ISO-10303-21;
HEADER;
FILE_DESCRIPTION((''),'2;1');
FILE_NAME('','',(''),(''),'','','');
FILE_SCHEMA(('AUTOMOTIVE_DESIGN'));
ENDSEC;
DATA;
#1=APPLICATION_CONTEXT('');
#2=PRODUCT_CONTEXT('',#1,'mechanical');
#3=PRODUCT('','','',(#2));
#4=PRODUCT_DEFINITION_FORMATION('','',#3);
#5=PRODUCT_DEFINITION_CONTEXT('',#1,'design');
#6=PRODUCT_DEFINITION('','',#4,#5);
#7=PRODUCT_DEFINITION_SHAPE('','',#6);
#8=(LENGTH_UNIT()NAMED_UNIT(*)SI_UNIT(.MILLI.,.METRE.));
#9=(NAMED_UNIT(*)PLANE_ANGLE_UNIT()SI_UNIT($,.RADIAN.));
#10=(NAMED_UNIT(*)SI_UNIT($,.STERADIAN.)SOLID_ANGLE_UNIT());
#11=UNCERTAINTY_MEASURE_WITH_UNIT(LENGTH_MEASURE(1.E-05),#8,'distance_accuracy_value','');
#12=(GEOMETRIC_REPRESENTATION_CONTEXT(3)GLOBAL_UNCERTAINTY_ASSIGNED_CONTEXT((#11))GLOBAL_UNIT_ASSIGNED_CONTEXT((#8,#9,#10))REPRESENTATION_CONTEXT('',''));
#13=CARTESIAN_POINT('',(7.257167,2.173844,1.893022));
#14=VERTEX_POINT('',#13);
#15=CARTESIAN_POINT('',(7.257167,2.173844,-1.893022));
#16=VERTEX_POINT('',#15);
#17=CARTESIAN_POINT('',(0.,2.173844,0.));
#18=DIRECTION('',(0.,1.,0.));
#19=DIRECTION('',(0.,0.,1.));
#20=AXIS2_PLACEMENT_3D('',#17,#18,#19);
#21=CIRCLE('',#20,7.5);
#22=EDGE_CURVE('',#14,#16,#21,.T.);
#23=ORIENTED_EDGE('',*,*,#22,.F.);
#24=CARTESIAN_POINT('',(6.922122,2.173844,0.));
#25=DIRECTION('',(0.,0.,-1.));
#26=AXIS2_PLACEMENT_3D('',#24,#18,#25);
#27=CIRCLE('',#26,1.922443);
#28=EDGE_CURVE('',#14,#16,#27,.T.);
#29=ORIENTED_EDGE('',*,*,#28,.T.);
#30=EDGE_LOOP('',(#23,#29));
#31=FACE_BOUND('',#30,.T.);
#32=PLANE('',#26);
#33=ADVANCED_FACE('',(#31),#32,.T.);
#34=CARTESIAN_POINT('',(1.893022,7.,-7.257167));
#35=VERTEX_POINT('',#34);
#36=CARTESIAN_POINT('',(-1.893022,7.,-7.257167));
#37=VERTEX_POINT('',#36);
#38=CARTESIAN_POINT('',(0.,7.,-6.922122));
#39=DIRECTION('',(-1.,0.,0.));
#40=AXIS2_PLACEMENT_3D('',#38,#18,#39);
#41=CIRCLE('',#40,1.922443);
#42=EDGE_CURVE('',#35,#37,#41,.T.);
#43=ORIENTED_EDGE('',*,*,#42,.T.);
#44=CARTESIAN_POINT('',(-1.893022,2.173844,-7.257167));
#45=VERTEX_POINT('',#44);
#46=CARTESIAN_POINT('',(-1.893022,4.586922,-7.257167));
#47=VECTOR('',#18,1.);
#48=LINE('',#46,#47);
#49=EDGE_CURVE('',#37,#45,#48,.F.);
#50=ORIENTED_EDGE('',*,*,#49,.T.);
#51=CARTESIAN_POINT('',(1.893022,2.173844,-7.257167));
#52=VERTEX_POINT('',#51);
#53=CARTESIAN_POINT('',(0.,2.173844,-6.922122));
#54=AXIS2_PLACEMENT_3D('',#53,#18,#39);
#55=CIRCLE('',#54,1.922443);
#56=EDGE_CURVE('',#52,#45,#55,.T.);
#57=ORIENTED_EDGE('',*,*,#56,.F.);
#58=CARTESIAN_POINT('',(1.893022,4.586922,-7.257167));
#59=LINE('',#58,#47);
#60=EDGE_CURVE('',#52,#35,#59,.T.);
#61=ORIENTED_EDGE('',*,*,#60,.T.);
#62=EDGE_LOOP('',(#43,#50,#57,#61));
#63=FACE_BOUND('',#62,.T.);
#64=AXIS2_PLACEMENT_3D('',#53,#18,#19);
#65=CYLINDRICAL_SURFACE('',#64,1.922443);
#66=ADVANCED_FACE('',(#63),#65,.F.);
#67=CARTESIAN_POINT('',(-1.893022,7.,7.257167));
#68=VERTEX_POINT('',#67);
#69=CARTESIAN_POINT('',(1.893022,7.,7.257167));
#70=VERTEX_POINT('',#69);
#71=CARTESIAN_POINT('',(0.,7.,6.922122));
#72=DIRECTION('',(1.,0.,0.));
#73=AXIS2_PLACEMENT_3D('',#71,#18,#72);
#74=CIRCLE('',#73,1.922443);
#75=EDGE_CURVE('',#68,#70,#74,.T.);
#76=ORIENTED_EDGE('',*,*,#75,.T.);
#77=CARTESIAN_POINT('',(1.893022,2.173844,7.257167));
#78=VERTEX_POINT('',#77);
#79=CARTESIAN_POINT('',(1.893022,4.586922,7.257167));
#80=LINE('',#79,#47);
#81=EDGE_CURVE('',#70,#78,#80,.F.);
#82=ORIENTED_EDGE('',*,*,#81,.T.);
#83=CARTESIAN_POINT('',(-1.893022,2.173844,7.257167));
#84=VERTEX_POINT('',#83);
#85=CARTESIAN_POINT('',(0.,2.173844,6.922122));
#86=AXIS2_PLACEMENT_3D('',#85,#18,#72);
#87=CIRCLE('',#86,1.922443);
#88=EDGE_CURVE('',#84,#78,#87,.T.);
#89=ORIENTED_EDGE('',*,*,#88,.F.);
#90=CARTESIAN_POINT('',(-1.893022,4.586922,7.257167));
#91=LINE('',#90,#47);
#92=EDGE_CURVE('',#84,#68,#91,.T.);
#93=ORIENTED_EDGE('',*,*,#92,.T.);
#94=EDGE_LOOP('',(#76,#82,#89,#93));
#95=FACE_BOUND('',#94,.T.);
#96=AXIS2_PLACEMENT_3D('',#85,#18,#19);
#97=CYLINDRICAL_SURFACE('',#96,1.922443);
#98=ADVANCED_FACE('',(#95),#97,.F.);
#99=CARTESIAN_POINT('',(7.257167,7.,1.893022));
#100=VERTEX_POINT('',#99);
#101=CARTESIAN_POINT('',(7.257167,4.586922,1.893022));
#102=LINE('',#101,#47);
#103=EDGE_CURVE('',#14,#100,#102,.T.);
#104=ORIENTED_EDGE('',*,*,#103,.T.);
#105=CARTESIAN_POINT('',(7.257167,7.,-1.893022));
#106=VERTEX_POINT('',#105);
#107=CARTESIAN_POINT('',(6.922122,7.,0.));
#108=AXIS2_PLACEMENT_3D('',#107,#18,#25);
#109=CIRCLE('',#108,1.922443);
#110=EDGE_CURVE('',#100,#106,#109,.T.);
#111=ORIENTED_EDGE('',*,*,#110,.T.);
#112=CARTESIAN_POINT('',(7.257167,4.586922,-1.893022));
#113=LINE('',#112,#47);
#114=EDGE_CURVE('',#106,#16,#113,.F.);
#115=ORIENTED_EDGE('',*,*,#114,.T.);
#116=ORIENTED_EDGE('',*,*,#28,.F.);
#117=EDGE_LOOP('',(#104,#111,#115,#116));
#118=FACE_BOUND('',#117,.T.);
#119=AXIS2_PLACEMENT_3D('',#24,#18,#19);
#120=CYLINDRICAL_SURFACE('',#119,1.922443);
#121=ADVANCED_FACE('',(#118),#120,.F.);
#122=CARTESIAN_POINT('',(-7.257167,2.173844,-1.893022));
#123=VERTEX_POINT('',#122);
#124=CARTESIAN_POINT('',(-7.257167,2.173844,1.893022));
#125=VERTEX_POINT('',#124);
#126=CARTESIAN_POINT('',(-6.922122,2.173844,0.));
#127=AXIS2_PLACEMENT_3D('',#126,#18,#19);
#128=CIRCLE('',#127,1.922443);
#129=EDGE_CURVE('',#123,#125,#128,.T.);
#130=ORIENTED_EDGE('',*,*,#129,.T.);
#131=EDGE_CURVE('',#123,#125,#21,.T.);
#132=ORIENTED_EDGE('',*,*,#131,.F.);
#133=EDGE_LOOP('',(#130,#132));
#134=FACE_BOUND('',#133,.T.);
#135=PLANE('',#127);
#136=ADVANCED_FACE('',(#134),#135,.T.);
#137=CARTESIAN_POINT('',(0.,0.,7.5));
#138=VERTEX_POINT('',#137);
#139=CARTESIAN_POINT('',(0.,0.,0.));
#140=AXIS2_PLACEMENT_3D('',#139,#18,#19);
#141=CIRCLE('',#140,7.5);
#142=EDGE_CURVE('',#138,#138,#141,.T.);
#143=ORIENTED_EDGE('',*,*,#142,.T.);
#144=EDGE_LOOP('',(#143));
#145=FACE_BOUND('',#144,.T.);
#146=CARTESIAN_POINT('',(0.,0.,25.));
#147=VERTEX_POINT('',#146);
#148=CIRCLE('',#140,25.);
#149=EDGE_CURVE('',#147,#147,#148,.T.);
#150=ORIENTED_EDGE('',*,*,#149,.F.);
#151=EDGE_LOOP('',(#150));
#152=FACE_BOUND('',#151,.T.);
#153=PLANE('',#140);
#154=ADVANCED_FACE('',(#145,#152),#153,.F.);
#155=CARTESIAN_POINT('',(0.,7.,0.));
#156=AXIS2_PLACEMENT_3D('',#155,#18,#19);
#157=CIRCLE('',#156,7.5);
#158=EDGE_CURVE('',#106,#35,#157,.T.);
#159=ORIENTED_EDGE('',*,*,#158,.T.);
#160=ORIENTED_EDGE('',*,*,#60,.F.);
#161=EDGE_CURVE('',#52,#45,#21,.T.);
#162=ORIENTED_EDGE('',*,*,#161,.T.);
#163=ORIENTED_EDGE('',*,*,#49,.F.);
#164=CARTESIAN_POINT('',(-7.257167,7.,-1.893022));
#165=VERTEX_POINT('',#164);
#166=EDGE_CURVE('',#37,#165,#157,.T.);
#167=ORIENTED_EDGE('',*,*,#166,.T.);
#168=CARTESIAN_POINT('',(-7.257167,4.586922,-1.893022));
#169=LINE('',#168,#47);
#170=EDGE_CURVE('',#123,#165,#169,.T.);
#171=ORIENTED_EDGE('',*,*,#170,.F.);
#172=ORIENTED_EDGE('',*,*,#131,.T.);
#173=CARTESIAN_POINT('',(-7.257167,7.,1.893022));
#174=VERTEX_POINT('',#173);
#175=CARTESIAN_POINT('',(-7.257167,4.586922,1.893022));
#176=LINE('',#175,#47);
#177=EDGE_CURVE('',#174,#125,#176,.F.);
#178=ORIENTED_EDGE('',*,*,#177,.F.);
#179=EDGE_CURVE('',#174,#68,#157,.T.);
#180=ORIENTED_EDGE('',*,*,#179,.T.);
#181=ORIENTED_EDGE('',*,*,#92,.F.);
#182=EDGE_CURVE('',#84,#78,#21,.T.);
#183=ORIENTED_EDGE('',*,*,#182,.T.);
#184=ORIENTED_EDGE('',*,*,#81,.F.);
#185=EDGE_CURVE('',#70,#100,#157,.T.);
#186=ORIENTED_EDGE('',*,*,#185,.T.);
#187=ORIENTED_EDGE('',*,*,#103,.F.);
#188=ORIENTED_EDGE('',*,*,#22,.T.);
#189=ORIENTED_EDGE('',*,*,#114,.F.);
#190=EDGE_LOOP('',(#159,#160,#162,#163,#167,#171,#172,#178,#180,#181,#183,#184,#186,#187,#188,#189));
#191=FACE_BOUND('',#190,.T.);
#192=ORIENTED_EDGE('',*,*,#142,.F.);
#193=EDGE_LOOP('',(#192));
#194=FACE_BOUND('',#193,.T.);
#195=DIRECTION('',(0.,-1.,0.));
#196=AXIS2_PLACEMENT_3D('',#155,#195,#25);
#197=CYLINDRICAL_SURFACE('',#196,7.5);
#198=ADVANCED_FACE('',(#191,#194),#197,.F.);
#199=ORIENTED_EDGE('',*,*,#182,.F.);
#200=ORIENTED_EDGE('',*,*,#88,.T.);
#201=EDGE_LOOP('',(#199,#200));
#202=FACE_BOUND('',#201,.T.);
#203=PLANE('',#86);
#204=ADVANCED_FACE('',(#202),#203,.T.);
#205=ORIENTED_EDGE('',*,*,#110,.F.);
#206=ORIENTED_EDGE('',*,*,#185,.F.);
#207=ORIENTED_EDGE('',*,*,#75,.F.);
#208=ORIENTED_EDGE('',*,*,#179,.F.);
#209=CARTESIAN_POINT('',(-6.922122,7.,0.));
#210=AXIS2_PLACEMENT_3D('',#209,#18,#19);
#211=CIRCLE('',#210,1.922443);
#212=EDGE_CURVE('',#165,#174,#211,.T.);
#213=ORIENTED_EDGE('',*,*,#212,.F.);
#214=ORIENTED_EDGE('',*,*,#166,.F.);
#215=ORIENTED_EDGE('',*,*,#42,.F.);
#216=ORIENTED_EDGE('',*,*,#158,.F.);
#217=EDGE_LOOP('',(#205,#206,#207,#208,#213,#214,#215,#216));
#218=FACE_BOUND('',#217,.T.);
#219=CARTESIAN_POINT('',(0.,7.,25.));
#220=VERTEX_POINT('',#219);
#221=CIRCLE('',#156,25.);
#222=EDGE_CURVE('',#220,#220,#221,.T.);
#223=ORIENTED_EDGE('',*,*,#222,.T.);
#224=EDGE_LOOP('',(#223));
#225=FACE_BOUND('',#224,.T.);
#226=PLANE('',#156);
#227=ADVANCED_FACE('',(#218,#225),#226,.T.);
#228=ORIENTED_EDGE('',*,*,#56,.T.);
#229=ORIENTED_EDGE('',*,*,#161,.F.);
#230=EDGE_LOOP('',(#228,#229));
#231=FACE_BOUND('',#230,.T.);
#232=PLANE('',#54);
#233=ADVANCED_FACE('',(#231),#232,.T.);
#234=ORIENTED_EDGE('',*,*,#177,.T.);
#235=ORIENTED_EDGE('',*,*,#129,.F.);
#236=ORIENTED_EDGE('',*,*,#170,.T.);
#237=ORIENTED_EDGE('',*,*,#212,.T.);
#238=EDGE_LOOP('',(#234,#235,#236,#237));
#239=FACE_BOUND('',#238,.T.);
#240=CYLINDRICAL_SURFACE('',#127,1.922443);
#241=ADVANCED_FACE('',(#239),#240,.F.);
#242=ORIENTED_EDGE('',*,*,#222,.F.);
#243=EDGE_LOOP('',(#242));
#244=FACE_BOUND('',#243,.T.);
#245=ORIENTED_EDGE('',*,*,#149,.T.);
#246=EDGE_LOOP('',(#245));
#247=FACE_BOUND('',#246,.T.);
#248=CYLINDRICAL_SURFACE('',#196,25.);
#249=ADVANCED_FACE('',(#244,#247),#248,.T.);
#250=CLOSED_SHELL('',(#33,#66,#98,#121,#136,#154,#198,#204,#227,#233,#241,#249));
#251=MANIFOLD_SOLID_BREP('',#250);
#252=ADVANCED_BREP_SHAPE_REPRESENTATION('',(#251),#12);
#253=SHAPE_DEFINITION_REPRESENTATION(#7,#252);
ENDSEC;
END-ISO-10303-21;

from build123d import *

# Parameters (mm, degrees)
SKETCH1_R           = 25
BOSS_EXTRUDE1_DEPTH = 7
SKETCH2_R           = 7.5
CUT_EXTRUDE1_DEPTH  = 37.041642582
SKETCH3_R           = 1.922442869
CUT_EXTRUDE2_DEPTH  = 4.826156053
CIRPATTERN1_COUNT   = 4


with BuildPart() as part:
    # Sketch1 → Boss-Extrude1 (new body)
    with BuildSketch(Plane(origin=(0, 0, 0), x_dir=(1, 0, 0), z_dir=(0, 1, 0))):
        Circle(SKETCH1_R)
    extrude(amount=BOSS_EXTRUDE1_DEPTH)

    # Sketch2 → Cut-Extrude1 (cut, through all)
    with BuildSketch(Plane(origin=(0, 0, 0), x_dir=(1, 0, 0), z_dir=(0, 1, 0))):
        Circle(SKETCH2_R)
    extrude(amount=CUT_EXTRUDE1_DEPTH, mode=Mode.SUBTRACT)

    # Sketch3 → Cut-Extrude2 (cut)
    with BuildSketch(Plane(origin=(0, 7, 0), x_dir=(1, 0, 0), z_dir=(0, 1, 0))):
        with Locations((-6.922121964, 0)):
            Circle(SKETCH3_R)
    cut_extrude2 = extrude(amount=-CUT_EXTRUDE2_DEPTH, mode=Mode.SUBTRACT)

    # CirPattern1: Cut-Extrude2 ×4 about axis
    cirpattern1_axis = Axis((0, 0, 0), (0, 1, 0))
    for i in range(1, CIRPATTERN1_COUNT):
        add(cut_extrude2.rotate(cirpattern1_axis, i * 360 / CIRPATTERN1_COUNT), mode=Mode.SUBTRACT)


solid = part.part
